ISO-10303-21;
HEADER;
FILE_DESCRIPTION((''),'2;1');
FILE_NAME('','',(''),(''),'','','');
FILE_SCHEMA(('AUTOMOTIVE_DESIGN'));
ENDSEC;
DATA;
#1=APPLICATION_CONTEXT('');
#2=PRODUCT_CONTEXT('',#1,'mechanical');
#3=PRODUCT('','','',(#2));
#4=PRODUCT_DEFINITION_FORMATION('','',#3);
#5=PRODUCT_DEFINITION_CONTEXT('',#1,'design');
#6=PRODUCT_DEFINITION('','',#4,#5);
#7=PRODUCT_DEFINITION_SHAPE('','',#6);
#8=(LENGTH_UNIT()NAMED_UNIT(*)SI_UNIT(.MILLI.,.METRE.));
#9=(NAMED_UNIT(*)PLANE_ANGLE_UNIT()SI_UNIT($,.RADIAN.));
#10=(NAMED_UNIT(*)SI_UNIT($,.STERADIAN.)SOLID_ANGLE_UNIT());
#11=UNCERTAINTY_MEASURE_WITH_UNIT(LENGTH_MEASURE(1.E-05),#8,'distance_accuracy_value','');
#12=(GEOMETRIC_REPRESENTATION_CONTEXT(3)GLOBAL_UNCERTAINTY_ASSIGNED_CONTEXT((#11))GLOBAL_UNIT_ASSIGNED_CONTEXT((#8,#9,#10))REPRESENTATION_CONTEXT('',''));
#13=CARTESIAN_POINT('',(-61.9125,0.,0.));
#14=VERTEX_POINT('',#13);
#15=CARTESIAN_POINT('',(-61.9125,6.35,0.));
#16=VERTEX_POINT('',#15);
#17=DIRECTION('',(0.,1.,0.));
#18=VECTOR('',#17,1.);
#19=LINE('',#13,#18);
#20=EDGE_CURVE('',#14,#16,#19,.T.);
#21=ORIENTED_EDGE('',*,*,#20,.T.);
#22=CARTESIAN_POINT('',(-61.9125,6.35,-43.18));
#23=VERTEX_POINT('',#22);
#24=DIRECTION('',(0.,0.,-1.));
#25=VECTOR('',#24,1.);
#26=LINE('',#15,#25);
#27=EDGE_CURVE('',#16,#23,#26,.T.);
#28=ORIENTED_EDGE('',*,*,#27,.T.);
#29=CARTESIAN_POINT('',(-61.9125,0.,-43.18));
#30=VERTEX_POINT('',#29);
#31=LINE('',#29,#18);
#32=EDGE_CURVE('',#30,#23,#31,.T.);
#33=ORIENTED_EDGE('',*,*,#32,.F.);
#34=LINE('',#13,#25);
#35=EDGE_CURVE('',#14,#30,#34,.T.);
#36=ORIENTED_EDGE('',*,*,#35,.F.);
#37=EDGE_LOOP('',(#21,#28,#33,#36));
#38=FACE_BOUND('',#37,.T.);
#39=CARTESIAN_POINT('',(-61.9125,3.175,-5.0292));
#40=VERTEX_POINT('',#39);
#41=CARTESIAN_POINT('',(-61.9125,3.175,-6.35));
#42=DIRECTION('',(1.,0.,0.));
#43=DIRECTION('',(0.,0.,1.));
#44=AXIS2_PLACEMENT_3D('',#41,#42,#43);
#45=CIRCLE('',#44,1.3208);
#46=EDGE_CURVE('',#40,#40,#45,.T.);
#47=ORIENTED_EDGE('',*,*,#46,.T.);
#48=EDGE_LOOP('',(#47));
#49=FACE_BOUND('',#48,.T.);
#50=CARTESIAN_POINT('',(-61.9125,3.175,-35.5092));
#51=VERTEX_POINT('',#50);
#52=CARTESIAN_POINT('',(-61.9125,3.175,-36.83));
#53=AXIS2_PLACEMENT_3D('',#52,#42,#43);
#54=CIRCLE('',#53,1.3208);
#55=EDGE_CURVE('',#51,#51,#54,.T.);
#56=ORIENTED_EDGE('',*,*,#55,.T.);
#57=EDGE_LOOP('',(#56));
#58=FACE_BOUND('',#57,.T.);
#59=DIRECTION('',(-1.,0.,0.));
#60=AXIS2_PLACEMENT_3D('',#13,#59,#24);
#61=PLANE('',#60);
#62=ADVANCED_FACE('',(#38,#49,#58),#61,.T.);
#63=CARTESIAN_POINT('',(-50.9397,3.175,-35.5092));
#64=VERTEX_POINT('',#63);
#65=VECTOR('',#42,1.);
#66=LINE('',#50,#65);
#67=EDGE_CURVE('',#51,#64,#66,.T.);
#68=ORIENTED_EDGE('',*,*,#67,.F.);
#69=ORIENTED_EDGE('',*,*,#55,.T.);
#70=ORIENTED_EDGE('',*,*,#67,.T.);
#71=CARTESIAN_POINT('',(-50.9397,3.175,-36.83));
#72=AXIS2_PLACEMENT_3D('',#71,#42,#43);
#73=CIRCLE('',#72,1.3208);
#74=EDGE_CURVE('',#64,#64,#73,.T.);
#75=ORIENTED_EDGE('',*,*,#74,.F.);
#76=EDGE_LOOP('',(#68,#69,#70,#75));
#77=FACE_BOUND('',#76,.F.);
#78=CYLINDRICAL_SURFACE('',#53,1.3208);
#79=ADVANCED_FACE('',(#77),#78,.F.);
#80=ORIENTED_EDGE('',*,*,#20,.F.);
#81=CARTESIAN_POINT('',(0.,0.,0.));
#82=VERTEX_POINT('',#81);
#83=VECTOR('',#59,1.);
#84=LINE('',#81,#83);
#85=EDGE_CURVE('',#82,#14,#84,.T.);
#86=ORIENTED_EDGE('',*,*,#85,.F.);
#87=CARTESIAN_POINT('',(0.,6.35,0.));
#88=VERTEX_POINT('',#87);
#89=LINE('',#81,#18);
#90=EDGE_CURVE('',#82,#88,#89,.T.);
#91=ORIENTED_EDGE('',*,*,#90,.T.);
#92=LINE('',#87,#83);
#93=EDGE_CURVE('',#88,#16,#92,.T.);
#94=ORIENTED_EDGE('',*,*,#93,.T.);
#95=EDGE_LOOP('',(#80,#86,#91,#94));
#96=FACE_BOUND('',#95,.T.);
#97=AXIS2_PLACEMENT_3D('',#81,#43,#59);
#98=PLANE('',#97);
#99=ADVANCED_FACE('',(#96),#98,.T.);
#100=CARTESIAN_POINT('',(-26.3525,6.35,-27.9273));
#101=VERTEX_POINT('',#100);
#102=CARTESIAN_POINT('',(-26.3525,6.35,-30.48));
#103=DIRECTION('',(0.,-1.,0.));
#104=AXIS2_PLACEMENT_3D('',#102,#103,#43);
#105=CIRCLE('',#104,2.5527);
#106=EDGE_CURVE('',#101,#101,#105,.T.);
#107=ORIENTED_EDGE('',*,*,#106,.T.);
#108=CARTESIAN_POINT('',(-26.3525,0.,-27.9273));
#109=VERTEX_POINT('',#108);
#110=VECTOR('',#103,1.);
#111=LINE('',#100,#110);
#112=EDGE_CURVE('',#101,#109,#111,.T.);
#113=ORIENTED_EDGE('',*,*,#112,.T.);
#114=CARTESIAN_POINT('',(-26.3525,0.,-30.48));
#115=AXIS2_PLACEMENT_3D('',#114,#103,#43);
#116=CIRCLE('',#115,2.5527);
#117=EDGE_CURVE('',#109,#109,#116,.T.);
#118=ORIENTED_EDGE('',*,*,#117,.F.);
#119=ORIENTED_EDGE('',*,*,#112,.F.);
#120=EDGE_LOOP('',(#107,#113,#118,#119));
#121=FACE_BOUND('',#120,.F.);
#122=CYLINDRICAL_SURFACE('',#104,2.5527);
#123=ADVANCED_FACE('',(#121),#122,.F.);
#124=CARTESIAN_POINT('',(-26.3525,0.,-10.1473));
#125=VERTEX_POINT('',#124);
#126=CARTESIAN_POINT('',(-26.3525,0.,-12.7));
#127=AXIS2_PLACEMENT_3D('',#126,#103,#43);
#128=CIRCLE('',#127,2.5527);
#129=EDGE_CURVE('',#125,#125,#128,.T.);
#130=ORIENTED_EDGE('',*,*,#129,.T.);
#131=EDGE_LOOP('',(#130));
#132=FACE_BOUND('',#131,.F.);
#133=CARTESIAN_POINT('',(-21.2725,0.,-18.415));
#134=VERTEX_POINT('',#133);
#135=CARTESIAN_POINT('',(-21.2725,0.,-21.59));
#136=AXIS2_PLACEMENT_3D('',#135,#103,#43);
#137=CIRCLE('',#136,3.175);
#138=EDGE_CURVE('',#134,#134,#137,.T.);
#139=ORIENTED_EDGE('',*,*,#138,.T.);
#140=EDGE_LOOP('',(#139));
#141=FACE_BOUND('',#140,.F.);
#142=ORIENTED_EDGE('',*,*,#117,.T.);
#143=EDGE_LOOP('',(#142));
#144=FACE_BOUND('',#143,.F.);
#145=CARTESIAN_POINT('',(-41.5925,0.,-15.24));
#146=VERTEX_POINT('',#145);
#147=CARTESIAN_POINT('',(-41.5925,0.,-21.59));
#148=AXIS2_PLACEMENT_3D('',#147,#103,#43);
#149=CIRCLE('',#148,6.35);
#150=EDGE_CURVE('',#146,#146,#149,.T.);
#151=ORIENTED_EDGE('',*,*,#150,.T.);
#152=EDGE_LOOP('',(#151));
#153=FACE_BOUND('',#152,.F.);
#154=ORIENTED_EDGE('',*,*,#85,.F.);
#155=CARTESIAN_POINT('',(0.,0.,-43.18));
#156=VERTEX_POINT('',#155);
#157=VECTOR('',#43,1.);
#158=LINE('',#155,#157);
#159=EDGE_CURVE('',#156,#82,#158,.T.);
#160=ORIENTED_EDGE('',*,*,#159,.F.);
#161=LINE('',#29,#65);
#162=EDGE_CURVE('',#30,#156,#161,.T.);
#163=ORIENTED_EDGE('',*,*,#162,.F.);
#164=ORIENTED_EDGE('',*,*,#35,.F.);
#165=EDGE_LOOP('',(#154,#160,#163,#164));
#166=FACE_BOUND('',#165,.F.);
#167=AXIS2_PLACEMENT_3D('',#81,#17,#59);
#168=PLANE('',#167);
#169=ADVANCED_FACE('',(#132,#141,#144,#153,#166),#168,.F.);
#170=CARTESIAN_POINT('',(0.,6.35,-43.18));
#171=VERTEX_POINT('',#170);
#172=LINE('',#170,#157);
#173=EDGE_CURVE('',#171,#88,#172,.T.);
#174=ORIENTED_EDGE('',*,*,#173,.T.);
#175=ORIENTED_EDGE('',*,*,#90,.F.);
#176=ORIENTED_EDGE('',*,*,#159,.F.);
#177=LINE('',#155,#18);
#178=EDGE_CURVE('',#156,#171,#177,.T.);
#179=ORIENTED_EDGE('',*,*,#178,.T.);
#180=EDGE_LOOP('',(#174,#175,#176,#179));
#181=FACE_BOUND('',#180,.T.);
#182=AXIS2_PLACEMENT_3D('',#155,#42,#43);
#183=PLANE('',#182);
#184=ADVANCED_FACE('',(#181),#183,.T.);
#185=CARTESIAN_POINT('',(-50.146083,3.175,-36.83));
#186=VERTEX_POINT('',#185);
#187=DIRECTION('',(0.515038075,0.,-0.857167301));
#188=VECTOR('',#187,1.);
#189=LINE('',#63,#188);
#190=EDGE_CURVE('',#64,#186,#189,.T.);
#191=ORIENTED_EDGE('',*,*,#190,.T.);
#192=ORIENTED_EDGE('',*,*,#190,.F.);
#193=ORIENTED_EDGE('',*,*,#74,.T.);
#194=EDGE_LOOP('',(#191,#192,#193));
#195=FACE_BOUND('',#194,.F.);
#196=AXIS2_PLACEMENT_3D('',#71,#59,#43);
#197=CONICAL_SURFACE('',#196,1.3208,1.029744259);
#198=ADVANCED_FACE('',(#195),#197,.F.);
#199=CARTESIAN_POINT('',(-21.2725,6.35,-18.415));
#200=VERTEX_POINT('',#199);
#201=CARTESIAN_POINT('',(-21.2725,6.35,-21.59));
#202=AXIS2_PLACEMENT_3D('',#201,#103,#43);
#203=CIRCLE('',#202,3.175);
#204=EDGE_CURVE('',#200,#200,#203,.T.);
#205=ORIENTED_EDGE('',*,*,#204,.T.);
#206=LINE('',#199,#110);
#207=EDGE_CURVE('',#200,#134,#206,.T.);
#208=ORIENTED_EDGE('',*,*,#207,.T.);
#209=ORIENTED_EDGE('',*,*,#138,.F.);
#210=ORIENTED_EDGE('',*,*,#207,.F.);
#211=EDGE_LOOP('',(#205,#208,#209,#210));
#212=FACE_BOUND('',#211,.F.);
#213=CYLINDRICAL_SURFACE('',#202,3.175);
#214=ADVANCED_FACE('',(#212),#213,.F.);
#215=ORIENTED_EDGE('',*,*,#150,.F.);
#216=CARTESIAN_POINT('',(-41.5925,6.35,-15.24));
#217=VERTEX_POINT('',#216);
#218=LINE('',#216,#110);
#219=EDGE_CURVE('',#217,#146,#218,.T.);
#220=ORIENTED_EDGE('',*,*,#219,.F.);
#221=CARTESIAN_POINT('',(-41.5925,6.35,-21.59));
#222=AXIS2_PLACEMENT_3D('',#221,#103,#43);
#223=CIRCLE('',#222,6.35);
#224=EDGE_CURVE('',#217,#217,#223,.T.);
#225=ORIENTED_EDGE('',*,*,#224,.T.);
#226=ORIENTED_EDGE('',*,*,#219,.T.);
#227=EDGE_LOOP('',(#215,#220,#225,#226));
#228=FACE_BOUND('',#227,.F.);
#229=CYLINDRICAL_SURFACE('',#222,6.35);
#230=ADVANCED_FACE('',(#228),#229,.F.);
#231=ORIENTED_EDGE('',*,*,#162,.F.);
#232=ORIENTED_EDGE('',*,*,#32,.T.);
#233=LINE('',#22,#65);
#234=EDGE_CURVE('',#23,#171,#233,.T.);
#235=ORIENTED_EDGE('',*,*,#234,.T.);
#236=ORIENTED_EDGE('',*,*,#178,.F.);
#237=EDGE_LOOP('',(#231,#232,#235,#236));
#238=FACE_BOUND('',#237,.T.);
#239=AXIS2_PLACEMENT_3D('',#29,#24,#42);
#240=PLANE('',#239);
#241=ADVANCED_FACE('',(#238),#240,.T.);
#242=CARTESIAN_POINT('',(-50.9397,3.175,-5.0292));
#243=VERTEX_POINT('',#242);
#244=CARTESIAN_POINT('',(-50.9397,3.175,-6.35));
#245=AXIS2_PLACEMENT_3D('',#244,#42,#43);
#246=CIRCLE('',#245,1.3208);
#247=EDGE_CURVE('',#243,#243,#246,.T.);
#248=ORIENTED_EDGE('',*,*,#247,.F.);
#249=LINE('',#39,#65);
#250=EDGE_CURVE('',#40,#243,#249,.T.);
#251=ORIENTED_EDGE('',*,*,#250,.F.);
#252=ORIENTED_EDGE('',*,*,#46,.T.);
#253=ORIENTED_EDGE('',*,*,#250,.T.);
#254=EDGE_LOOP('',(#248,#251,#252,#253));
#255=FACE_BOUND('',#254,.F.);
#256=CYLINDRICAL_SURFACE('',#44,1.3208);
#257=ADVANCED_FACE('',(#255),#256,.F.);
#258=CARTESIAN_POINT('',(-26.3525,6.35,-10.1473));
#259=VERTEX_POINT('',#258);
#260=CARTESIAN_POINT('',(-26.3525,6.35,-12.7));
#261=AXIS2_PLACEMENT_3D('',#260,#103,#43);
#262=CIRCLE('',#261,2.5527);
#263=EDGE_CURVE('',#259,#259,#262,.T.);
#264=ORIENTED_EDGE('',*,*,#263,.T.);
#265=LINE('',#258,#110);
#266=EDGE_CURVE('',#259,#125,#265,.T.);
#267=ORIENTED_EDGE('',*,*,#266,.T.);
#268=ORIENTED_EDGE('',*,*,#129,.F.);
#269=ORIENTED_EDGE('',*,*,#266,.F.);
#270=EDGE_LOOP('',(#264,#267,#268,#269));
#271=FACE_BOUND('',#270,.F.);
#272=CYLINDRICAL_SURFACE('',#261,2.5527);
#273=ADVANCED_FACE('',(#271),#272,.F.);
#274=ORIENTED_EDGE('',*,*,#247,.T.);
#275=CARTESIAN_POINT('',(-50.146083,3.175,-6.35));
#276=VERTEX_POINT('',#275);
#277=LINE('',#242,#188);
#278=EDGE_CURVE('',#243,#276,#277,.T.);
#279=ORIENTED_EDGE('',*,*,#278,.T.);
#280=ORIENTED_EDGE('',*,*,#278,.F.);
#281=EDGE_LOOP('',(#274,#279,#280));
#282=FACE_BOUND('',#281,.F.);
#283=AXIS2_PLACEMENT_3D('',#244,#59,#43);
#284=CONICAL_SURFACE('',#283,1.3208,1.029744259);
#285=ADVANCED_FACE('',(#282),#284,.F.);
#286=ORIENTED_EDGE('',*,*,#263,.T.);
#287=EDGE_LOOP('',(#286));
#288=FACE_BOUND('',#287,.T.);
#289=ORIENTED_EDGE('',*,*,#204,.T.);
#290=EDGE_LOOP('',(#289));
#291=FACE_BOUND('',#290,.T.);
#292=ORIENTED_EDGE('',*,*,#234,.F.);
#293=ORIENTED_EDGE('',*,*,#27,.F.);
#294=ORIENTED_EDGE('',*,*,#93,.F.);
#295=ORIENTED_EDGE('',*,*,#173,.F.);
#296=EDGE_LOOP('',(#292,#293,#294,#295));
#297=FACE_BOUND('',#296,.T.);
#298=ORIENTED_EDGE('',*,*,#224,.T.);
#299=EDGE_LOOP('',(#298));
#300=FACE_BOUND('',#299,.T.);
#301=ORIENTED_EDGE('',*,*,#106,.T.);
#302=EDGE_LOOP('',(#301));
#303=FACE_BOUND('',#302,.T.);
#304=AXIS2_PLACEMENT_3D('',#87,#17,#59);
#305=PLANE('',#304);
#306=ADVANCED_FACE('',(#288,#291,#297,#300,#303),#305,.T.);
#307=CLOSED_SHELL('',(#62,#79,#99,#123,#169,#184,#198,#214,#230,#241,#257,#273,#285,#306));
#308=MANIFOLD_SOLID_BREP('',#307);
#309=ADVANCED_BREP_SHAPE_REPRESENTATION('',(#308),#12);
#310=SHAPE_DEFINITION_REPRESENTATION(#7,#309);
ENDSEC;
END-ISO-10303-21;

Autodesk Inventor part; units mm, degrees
ref_plane "YZ Plane" through (0, 0, 0) normal (1, 0, 0) x (0, 1, 0)
ref_plane "XZ Plane" through (0, 0, 0) normal (0, 1, 0) x (-1, 0, 0)
ref_plane "XY Plane" through (0, 0, 0) normal (0, 0, 1) x (1, 0, 0)
sketch "Sketch1" plane through (0, 0, 0) normal (0, 1, 0) x (-1, 0, 0)
  line L0 (0, 0) -> (61.9125, 0)
  line L1 (61.9125, 0) -> (61.9125, -43.18)
  line L2 (61.9125, -43.18) -> (0, -43.18)
  line L3 (0, -43.18) -> (0, 0)
  dimension "d0" = 61.9125
  dimension "d1" = 43.18
extrude "Extrusion1" add sketch "Sketch1" along normal blind 6.35
sketch "Sketch2" plane through (0, 6.35, 0) normal (0, 1, 0) x (1, 0, 0)
  line L0 (-61.9125, 43.18) -> (-61.9125, 0)
  line L1 (-61.9125, 0) -> (0, 0)
  line L2 (0, 0) -> (0, 43.18)
  line L3 (-61.9125, 43.18) -> (0, 43.18)
  line L4 (-61.9125, 43.18) -> (-61.9125, 0) projected
  line L5 (0, 43.18) -> (-61.9125, 43.18) projected
  line L6 (-61.9125, 0) -> (0, 0) projected
  line L7 (0, 0) -> (0, 43.18) projected
  point P0 (-41.5925, 21.59)
  point P1 (-21.2725, 21.59)
  point P2 (-26.3525, 30.48)
  point P3 (-26.3525, 12.7)
  dimension "d10" = 21.2725
  dimension "d11" = 21.59
  dimension "d14" = 21.59
  dimension "d15" = 20.32
  dimension "d18" = 12.7
  dimension "d19" = 12.7
  dimension "d20" = 15.24
  dimension "d21" = 15.24
hole "Hole1" at (-21.2725, 6.35, -21.59) direction (0, -1, 0) diameter 6.35 depth 10.9728 tip angle 118
hole "Hole2" at (-41.5925, 6.35, -21.59) direction (0, -1, 0) diameter 12.7 end through all
hole "Hole3" at (-26.3525, 6.35, -30.48) at (-26.3525, 6.35, -12.7) direction (0, -1, 0) diameter 5.1054 end through all clearance for "Flat Head Machine Screw (82)" size "#10" standard "Ansi Unified Screw Threads"
sketch "Sketch3" plane through (-61.9125, 0, -43.18) normal (-1, 0, 0) x (0, 0, 1)
  line L0 (43.18, 0) -> (43.18, 6.35) projected
  line L1 (0, 0) -> (0, 6.35) projected
  line L2 (0, 0) -> (43.18, 0) projected
  point P0 (6.35, 3.175)
  point P1 (36.83, 3.175)
  dimension "d50" = 6.35
  dimension "d51" = 6.35
  dimension "d52" = 3.175
hole "Hole4" at (-61.9125, 3.175, -36.83) at (-61.9125, 3.175, -6.35) direction (1, 0, 0) diameter 2.6416 depth 10.9728 tip angle 118 thread size "6-32 UNC" class "3B" standard "ANSI Unified Screw Threads"
properties part number "AR-BracketRight2"
